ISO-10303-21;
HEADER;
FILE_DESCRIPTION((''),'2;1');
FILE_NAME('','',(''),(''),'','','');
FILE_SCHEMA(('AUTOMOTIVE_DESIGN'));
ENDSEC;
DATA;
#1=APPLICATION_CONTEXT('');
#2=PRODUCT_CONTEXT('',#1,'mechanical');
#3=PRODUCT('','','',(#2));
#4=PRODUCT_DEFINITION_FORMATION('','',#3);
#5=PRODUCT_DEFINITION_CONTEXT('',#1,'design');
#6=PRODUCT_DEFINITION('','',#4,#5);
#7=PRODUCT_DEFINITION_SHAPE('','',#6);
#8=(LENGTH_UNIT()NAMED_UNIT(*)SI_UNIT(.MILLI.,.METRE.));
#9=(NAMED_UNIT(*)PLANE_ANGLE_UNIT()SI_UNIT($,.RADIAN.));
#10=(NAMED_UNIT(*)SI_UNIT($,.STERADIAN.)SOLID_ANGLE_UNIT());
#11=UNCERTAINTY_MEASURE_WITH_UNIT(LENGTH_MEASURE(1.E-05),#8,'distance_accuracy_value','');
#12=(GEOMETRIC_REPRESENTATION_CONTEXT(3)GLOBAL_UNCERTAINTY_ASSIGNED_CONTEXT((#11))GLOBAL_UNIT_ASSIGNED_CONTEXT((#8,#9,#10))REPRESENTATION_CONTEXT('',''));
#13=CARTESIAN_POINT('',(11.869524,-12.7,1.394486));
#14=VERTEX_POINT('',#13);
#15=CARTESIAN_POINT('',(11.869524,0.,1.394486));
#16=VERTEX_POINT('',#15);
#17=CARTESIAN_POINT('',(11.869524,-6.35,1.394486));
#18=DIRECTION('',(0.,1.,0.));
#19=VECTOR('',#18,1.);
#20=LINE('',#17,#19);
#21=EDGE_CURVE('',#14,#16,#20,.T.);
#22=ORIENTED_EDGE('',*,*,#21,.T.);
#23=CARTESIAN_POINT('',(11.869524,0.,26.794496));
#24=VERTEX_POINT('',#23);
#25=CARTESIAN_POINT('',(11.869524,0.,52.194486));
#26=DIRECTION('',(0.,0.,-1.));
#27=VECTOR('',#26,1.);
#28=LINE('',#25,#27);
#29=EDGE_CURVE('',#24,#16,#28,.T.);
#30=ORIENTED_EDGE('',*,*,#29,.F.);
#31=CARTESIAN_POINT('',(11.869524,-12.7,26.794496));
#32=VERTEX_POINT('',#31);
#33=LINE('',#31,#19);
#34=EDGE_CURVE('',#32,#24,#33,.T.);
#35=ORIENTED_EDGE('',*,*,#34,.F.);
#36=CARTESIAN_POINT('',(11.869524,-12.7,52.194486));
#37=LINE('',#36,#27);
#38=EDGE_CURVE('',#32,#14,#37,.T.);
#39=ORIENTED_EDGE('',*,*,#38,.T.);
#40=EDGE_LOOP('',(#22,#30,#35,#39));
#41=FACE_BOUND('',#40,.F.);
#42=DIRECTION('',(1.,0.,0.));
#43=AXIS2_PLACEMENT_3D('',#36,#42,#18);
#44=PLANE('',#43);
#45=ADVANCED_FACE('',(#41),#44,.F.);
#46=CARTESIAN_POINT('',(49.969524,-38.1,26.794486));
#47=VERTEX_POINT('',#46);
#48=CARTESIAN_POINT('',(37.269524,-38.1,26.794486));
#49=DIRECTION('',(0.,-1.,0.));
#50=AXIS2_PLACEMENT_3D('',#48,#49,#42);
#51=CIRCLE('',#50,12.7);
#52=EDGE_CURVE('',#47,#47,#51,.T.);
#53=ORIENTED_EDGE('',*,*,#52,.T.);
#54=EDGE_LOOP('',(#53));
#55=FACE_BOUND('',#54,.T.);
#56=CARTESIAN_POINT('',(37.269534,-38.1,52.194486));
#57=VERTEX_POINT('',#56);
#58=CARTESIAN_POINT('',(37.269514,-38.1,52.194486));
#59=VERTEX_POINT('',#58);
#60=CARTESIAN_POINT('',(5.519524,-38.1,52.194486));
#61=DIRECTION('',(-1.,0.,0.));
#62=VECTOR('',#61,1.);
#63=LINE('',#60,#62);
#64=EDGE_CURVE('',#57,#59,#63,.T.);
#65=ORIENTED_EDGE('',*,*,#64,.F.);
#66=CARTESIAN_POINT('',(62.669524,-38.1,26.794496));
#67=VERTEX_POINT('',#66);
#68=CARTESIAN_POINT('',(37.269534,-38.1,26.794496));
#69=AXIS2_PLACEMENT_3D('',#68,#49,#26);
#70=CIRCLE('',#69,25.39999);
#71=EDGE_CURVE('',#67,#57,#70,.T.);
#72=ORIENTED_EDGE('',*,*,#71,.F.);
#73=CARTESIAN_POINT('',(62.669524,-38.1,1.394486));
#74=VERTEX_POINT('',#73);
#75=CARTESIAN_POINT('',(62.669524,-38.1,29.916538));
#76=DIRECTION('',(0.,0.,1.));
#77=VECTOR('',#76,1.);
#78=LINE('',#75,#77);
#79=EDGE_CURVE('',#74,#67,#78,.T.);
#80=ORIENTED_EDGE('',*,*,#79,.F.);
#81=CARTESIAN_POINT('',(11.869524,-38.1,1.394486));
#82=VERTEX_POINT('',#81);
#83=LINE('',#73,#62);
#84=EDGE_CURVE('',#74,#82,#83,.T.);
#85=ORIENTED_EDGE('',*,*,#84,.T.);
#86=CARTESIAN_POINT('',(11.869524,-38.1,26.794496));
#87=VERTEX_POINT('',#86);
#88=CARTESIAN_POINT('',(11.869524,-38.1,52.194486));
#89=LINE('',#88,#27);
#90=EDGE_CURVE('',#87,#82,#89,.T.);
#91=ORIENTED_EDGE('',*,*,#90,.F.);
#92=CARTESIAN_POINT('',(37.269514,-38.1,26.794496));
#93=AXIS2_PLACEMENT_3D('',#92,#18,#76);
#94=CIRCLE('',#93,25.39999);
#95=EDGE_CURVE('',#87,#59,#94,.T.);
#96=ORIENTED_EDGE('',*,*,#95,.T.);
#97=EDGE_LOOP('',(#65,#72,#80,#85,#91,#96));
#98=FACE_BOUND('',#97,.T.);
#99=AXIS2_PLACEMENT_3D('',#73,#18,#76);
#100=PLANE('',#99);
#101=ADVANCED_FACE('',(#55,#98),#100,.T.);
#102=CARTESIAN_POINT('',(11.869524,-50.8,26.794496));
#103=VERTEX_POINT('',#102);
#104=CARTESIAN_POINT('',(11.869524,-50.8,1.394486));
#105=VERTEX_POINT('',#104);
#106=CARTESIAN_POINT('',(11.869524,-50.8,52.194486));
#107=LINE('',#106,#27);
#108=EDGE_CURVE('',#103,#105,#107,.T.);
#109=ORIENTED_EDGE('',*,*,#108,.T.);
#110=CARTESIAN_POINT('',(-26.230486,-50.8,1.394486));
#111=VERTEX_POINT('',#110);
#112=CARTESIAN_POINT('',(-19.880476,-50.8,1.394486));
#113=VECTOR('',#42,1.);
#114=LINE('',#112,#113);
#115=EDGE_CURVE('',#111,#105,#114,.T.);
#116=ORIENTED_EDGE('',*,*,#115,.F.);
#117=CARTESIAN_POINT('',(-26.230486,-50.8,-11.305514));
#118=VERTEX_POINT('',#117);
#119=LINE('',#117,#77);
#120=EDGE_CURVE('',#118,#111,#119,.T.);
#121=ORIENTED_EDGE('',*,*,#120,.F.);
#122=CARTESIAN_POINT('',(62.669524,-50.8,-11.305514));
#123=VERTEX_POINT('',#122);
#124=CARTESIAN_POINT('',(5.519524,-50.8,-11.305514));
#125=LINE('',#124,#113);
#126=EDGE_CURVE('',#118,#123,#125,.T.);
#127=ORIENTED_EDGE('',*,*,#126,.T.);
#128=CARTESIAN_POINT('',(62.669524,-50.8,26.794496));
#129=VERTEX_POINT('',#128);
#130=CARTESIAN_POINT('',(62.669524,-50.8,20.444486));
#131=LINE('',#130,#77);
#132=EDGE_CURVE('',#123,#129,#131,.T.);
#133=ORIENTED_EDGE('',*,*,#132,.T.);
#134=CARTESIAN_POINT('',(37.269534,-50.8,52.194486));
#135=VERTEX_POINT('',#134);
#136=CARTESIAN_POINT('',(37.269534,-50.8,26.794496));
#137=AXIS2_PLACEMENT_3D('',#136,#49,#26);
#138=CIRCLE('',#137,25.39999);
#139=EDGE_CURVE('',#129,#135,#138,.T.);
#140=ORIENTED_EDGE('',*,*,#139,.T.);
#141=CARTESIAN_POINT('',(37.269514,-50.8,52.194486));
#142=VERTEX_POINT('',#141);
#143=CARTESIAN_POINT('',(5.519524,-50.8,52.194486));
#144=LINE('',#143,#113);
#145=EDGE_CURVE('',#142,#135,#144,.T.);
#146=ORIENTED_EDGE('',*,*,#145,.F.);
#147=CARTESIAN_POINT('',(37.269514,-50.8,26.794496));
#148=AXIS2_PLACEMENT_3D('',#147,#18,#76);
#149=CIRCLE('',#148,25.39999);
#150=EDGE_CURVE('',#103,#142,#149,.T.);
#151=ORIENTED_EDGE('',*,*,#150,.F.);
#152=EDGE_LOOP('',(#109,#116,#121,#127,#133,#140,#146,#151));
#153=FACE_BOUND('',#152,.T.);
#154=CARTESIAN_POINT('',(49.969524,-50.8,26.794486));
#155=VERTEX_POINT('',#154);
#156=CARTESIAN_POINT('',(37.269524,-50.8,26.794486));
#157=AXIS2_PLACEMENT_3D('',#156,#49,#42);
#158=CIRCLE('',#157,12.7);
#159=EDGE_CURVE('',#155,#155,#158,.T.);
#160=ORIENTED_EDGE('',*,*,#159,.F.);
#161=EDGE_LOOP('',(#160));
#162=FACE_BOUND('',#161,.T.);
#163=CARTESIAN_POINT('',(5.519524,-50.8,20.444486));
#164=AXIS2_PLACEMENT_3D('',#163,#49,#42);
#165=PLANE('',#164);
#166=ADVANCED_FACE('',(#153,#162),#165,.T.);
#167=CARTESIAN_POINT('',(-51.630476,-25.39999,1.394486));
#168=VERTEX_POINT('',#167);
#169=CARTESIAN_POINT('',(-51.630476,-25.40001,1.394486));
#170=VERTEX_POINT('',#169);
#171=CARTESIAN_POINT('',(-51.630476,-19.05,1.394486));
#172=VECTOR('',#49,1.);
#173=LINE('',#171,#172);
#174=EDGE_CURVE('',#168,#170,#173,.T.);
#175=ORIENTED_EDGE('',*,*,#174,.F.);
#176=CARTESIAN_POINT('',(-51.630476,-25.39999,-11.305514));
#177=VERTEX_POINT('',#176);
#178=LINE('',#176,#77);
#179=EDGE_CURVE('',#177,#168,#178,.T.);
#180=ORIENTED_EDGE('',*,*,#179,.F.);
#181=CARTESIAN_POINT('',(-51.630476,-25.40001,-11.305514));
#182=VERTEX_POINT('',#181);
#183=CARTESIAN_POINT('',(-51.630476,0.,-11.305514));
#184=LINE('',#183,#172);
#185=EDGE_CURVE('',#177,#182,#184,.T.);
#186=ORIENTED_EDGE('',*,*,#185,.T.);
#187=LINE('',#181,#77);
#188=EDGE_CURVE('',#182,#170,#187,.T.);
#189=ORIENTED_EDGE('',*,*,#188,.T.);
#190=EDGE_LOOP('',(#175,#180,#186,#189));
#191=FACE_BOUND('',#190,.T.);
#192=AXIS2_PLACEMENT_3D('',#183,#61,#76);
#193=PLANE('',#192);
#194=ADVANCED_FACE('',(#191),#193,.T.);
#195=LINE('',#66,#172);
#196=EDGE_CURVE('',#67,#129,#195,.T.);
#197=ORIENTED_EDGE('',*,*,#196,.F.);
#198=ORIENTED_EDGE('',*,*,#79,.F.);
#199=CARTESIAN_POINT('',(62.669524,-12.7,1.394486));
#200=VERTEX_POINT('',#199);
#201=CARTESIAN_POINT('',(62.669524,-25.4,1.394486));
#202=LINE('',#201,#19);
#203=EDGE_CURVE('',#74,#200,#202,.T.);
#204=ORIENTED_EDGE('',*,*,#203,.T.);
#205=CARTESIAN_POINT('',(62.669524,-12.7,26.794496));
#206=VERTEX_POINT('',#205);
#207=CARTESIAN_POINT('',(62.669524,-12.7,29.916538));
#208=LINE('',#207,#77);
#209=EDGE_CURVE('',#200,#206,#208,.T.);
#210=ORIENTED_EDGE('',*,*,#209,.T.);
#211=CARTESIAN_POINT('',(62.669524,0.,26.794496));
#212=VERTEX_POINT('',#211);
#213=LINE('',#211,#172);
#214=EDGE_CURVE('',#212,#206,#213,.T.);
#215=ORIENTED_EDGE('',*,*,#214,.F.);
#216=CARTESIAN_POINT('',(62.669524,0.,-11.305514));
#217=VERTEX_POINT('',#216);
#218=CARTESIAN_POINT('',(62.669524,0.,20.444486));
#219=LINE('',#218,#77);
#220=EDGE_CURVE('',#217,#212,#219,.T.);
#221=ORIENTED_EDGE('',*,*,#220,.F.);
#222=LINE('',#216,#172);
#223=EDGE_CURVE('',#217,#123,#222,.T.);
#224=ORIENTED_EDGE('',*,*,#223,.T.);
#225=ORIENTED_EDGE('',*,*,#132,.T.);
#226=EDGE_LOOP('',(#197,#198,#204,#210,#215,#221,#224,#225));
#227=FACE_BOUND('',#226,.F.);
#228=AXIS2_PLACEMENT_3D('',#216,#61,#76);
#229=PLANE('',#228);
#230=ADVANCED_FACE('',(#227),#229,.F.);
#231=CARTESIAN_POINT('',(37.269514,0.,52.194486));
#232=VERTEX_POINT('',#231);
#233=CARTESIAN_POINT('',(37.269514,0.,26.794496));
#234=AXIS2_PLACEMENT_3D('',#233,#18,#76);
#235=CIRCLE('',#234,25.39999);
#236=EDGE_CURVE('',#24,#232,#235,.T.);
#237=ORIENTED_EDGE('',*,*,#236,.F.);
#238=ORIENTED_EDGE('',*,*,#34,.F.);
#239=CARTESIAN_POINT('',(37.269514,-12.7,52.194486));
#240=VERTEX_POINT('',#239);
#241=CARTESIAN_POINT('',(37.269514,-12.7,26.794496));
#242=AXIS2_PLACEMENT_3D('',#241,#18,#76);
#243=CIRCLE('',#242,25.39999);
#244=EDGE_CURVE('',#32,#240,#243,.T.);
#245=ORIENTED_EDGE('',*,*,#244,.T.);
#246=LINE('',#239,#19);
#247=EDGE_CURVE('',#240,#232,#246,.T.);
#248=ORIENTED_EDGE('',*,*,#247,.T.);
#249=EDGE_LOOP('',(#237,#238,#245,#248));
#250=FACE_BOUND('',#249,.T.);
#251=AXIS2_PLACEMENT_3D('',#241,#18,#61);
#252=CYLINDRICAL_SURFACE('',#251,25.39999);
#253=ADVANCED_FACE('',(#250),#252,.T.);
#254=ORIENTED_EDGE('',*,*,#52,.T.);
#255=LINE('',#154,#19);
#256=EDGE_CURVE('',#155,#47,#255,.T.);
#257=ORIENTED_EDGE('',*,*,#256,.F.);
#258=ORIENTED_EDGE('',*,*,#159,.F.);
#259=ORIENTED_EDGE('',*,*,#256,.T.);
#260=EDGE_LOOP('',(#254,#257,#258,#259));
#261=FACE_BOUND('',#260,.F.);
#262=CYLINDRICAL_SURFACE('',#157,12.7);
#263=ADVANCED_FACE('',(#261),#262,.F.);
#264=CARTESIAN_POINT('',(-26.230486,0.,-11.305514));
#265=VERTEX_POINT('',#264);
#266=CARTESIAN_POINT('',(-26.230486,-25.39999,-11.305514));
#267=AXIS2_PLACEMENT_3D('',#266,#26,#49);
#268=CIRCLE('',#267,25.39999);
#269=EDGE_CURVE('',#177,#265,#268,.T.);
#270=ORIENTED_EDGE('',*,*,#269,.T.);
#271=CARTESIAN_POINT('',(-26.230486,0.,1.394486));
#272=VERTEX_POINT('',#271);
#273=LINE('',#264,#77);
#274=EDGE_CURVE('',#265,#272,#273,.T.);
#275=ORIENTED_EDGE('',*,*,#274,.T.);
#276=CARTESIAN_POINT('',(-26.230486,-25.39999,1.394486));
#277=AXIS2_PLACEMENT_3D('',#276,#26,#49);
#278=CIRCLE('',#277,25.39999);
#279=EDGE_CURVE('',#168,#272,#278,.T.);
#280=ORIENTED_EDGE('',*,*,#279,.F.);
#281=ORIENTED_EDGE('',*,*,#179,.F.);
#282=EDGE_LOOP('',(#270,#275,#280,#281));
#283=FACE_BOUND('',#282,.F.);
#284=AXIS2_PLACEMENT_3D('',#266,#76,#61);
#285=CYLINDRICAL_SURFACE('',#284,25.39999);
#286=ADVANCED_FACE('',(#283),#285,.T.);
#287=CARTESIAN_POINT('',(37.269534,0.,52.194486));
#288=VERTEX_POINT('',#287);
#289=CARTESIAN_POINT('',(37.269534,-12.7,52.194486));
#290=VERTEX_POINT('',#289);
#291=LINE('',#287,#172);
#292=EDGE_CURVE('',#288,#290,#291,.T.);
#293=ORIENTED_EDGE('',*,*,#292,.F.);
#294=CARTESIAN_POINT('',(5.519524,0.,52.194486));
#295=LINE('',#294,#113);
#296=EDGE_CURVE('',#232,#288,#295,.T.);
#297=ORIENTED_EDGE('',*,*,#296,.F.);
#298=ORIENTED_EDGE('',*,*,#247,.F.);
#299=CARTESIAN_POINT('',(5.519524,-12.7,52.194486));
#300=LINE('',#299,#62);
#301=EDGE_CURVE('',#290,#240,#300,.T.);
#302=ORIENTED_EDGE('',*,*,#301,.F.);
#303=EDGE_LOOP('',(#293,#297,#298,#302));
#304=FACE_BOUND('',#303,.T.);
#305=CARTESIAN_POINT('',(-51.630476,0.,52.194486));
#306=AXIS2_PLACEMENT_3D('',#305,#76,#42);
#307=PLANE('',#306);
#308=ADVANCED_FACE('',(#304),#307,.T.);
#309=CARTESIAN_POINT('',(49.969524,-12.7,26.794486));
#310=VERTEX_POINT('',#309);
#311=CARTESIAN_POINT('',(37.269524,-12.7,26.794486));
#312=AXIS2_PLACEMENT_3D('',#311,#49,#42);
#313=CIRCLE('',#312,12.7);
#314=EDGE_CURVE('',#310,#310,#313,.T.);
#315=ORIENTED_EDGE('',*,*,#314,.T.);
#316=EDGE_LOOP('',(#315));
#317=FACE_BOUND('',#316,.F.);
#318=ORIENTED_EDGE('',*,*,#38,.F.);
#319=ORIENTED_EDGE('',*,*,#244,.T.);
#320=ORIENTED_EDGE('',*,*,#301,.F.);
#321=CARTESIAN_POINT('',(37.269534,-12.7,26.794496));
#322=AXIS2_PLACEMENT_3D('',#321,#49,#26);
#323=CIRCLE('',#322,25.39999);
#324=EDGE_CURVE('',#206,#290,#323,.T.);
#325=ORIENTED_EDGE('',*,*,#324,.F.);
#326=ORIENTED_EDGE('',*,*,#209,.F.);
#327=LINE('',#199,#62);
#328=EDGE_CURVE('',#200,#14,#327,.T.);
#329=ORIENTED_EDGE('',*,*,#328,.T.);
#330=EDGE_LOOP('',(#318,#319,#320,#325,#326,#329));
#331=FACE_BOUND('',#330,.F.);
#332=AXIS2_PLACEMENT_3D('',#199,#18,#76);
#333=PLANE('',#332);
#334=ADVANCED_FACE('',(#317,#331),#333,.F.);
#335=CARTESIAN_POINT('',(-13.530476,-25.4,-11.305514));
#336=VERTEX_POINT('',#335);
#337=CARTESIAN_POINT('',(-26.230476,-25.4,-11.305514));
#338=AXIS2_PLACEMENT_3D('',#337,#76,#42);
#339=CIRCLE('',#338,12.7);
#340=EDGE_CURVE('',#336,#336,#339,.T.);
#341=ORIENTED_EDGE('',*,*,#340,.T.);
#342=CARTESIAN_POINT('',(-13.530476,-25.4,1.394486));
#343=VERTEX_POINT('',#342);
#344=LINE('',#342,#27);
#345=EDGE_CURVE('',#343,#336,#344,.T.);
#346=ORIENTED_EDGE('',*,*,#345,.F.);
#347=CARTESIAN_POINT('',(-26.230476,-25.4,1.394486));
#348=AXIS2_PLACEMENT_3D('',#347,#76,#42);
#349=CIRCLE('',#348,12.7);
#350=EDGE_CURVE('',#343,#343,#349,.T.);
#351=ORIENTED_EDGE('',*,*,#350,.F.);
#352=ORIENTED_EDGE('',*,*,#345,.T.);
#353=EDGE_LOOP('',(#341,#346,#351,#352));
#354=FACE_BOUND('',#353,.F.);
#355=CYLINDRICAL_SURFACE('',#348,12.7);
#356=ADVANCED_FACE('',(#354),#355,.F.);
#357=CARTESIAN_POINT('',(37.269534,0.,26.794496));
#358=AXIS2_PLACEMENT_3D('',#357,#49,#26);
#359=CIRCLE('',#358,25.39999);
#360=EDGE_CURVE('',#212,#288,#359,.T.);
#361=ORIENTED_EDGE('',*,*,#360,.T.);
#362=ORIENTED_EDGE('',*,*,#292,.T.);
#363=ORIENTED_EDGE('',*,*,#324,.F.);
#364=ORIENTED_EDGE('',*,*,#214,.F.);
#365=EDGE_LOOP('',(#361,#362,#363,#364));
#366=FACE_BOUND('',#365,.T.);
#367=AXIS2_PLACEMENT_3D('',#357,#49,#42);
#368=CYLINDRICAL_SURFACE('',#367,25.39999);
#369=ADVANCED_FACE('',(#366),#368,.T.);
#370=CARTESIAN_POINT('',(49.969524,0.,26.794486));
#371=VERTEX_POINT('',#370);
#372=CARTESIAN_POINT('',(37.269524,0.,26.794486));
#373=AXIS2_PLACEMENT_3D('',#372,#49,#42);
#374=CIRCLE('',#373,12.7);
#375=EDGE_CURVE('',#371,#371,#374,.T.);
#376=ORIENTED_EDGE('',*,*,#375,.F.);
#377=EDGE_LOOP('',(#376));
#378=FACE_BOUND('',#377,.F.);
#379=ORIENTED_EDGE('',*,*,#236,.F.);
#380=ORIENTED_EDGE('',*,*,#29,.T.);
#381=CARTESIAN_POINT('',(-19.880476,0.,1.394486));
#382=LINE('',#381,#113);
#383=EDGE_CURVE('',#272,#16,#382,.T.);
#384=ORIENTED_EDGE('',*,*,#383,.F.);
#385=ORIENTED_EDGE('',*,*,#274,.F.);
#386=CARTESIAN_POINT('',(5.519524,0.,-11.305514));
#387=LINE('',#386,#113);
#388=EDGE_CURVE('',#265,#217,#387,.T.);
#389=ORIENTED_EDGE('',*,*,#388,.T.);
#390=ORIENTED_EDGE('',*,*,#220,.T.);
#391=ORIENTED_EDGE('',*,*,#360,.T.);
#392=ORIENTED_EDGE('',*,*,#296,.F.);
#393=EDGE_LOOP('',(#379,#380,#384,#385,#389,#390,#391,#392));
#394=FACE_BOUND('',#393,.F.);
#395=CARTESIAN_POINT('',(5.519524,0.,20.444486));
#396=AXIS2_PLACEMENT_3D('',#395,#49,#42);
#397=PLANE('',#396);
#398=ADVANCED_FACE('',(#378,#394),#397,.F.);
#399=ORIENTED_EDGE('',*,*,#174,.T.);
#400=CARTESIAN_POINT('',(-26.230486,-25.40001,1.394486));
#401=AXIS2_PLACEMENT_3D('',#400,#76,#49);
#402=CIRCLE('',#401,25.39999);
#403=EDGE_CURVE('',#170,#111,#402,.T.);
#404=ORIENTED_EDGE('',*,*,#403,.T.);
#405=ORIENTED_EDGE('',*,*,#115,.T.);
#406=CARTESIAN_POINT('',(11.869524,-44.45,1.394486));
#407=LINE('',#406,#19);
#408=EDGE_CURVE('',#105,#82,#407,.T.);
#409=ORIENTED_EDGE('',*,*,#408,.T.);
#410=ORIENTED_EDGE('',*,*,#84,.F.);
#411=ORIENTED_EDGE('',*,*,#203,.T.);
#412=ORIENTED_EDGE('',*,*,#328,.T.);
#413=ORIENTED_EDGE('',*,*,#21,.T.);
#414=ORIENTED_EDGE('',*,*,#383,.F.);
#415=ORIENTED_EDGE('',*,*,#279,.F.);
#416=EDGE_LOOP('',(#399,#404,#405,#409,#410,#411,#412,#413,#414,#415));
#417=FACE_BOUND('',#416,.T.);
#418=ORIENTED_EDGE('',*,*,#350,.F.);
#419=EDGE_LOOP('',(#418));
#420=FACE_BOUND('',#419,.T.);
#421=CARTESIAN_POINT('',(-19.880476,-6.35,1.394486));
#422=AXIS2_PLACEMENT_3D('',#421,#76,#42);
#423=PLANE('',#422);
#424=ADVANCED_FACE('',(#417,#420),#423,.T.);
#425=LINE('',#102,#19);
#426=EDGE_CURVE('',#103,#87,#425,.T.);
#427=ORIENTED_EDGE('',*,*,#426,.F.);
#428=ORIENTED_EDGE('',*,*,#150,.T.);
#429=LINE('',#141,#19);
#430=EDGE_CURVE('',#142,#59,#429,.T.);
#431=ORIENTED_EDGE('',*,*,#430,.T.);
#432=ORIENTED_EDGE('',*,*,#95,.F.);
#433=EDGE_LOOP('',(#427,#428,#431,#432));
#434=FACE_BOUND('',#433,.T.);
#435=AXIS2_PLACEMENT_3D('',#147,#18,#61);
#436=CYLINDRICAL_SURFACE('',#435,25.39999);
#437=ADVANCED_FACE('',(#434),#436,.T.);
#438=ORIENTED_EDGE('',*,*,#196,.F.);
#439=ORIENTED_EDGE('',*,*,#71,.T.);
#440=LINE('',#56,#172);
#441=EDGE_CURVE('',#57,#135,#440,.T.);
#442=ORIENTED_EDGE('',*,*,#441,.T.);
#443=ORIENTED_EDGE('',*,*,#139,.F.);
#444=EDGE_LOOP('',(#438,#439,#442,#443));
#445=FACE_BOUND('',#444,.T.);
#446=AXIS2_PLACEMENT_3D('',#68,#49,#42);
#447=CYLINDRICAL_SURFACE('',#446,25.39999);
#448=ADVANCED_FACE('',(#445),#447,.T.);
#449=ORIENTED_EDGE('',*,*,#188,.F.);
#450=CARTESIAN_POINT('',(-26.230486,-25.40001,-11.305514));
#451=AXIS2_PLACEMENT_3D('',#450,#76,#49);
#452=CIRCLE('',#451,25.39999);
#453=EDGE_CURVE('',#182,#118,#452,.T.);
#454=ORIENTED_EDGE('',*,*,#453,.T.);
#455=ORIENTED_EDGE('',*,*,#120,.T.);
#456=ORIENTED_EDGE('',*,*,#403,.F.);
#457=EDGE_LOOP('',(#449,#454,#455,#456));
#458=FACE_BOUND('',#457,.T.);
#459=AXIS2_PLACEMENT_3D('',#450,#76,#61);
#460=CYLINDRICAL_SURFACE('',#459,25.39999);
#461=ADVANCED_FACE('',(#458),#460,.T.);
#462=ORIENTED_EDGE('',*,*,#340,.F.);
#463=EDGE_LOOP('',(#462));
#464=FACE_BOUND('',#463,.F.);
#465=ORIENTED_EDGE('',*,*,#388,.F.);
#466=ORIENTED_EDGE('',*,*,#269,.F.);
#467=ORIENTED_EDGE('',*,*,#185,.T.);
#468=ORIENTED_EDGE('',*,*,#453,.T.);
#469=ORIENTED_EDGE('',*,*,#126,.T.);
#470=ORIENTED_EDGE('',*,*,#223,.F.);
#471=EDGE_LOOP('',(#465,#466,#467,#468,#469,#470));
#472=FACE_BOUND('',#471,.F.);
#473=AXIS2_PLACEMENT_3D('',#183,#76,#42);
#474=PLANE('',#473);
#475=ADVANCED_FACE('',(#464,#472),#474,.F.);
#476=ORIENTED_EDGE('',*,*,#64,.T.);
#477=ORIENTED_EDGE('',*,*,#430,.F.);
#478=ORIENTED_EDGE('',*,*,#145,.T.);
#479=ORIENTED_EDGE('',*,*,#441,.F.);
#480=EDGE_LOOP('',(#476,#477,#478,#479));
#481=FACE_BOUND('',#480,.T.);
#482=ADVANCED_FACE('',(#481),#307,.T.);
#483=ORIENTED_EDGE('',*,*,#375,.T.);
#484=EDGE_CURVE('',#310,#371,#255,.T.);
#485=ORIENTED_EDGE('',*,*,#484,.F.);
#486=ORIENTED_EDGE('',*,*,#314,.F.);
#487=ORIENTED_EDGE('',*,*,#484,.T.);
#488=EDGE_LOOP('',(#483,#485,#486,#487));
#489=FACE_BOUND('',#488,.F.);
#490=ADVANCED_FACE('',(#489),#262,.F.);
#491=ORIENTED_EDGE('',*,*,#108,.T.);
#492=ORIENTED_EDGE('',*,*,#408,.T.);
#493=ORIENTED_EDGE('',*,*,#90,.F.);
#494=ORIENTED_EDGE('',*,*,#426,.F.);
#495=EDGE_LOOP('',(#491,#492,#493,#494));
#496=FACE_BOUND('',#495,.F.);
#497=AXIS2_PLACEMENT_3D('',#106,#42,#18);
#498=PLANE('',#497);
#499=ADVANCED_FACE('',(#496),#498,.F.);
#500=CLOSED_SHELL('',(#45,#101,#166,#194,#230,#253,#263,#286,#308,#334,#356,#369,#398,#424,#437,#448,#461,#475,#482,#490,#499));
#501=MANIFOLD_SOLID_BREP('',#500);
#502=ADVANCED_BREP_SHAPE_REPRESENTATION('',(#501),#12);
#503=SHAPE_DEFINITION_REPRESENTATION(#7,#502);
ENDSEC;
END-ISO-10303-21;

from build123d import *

# Parameters (mm, degrees)
F0_W      = 114.3
F0_H      = 63.5
F1_DEPTH  = 50.8
F2_W      = 25.4
F2_H      = 57.0441053795
F3_DEPTH  = 114.301
F4_W      = 63.5
F4_H      = 12.7
F5_DEPTH  = 50.8
F6_W      = 63.5
F6_H      = 12.7
F7_DEPTH  = 50.8
F8_R      = 12.7
F9_DEPTH  = 50.801
F10_R     = 25.39999
F11_R     = 12.7
F12_DEPTH = 12.701


# Not quite as in the source:
# - a fillet or chamfer is up to 0.001 mm smaller than in the source, because OpenCascade refuses the exact size


with BuildPart() as f1:
    # F0 (on Front) → F1 (new body)
    with BuildSketch(Plane.XZ):
        with Locations((5.5195242167, 20.4444855223)):
            Rectangle(F0_W, F0_H)
    extrude(amount=F1_DEPTH)

    # F2 (on face) → F3 (cut, through all)
    with BuildSketch(Plane.YZ.offset(62.6695242167)):
        with Locations((-25.4, 29.9165382121)):
            Rectangle(F2_W, F2_H)
    extrude(amount=-F3_DEPTH, mode=Mode.SUBTRACT)

    # F4 (on face) → F5 (cut)
    with BuildSketch(Plane.XY.offset(52.1944855223)):
        with Locations((-19.8804757833, -44.45)):
            Rectangle(F4_W, F4_H)
    extrude(amount=-F5_DEPTH, mode=Mode.SUBTRACT)

    # F6 (on face) → F7 (cut)
    with BuildSketch(Plane.XY.offset(52.1944855223)):
        with Locations((-19.8804757833, -6.35)):
            Rectangle(F6_W, F6_H)
    extrude(amount=-F7_DEPTH, mode=Mode.SUBTRACT)

    # F8 (on face) → F9 (cut, through all)
    with BuildSketch(Plane.XZ.offset(50.8)):
        with Locations((37.2695242167, 26.7944855223)):
            Circle(F8_R)
    extrude(amount=-F9_DEPTH, mode=Mode.SUBTRACT)

    # F10 (radius 25.4 in the source; OpenCascade refuses exactly that, so slightly less here)
    f10_edges = [f1.edges().sort_by_distance(p)[0] for p in [
        (62.669524, -44.45, 52.194486),
        (11.869524, -44.45, 52.194486),
        (11.869524, -6.35, 52.194486),
        (62.669524, -6.35, 52.194486),
        (-51.630476, -50.8, -4.955514),
        (-51.630476, 0, -4.955514),
    ]]
    fillet(f10_edges, radius=F10_R)

    # F11 (on face) → F12 (cut, through all)
    with BuildSketch(Plane.XY.offset(1.3944855223)):
        with Locations((-26.2304757833, -25.4)):
            Circle(F11_R)
    extrude(amount=-F12_DEPTH, mode=Mode.SUBTRACT)


solid = f1.part
